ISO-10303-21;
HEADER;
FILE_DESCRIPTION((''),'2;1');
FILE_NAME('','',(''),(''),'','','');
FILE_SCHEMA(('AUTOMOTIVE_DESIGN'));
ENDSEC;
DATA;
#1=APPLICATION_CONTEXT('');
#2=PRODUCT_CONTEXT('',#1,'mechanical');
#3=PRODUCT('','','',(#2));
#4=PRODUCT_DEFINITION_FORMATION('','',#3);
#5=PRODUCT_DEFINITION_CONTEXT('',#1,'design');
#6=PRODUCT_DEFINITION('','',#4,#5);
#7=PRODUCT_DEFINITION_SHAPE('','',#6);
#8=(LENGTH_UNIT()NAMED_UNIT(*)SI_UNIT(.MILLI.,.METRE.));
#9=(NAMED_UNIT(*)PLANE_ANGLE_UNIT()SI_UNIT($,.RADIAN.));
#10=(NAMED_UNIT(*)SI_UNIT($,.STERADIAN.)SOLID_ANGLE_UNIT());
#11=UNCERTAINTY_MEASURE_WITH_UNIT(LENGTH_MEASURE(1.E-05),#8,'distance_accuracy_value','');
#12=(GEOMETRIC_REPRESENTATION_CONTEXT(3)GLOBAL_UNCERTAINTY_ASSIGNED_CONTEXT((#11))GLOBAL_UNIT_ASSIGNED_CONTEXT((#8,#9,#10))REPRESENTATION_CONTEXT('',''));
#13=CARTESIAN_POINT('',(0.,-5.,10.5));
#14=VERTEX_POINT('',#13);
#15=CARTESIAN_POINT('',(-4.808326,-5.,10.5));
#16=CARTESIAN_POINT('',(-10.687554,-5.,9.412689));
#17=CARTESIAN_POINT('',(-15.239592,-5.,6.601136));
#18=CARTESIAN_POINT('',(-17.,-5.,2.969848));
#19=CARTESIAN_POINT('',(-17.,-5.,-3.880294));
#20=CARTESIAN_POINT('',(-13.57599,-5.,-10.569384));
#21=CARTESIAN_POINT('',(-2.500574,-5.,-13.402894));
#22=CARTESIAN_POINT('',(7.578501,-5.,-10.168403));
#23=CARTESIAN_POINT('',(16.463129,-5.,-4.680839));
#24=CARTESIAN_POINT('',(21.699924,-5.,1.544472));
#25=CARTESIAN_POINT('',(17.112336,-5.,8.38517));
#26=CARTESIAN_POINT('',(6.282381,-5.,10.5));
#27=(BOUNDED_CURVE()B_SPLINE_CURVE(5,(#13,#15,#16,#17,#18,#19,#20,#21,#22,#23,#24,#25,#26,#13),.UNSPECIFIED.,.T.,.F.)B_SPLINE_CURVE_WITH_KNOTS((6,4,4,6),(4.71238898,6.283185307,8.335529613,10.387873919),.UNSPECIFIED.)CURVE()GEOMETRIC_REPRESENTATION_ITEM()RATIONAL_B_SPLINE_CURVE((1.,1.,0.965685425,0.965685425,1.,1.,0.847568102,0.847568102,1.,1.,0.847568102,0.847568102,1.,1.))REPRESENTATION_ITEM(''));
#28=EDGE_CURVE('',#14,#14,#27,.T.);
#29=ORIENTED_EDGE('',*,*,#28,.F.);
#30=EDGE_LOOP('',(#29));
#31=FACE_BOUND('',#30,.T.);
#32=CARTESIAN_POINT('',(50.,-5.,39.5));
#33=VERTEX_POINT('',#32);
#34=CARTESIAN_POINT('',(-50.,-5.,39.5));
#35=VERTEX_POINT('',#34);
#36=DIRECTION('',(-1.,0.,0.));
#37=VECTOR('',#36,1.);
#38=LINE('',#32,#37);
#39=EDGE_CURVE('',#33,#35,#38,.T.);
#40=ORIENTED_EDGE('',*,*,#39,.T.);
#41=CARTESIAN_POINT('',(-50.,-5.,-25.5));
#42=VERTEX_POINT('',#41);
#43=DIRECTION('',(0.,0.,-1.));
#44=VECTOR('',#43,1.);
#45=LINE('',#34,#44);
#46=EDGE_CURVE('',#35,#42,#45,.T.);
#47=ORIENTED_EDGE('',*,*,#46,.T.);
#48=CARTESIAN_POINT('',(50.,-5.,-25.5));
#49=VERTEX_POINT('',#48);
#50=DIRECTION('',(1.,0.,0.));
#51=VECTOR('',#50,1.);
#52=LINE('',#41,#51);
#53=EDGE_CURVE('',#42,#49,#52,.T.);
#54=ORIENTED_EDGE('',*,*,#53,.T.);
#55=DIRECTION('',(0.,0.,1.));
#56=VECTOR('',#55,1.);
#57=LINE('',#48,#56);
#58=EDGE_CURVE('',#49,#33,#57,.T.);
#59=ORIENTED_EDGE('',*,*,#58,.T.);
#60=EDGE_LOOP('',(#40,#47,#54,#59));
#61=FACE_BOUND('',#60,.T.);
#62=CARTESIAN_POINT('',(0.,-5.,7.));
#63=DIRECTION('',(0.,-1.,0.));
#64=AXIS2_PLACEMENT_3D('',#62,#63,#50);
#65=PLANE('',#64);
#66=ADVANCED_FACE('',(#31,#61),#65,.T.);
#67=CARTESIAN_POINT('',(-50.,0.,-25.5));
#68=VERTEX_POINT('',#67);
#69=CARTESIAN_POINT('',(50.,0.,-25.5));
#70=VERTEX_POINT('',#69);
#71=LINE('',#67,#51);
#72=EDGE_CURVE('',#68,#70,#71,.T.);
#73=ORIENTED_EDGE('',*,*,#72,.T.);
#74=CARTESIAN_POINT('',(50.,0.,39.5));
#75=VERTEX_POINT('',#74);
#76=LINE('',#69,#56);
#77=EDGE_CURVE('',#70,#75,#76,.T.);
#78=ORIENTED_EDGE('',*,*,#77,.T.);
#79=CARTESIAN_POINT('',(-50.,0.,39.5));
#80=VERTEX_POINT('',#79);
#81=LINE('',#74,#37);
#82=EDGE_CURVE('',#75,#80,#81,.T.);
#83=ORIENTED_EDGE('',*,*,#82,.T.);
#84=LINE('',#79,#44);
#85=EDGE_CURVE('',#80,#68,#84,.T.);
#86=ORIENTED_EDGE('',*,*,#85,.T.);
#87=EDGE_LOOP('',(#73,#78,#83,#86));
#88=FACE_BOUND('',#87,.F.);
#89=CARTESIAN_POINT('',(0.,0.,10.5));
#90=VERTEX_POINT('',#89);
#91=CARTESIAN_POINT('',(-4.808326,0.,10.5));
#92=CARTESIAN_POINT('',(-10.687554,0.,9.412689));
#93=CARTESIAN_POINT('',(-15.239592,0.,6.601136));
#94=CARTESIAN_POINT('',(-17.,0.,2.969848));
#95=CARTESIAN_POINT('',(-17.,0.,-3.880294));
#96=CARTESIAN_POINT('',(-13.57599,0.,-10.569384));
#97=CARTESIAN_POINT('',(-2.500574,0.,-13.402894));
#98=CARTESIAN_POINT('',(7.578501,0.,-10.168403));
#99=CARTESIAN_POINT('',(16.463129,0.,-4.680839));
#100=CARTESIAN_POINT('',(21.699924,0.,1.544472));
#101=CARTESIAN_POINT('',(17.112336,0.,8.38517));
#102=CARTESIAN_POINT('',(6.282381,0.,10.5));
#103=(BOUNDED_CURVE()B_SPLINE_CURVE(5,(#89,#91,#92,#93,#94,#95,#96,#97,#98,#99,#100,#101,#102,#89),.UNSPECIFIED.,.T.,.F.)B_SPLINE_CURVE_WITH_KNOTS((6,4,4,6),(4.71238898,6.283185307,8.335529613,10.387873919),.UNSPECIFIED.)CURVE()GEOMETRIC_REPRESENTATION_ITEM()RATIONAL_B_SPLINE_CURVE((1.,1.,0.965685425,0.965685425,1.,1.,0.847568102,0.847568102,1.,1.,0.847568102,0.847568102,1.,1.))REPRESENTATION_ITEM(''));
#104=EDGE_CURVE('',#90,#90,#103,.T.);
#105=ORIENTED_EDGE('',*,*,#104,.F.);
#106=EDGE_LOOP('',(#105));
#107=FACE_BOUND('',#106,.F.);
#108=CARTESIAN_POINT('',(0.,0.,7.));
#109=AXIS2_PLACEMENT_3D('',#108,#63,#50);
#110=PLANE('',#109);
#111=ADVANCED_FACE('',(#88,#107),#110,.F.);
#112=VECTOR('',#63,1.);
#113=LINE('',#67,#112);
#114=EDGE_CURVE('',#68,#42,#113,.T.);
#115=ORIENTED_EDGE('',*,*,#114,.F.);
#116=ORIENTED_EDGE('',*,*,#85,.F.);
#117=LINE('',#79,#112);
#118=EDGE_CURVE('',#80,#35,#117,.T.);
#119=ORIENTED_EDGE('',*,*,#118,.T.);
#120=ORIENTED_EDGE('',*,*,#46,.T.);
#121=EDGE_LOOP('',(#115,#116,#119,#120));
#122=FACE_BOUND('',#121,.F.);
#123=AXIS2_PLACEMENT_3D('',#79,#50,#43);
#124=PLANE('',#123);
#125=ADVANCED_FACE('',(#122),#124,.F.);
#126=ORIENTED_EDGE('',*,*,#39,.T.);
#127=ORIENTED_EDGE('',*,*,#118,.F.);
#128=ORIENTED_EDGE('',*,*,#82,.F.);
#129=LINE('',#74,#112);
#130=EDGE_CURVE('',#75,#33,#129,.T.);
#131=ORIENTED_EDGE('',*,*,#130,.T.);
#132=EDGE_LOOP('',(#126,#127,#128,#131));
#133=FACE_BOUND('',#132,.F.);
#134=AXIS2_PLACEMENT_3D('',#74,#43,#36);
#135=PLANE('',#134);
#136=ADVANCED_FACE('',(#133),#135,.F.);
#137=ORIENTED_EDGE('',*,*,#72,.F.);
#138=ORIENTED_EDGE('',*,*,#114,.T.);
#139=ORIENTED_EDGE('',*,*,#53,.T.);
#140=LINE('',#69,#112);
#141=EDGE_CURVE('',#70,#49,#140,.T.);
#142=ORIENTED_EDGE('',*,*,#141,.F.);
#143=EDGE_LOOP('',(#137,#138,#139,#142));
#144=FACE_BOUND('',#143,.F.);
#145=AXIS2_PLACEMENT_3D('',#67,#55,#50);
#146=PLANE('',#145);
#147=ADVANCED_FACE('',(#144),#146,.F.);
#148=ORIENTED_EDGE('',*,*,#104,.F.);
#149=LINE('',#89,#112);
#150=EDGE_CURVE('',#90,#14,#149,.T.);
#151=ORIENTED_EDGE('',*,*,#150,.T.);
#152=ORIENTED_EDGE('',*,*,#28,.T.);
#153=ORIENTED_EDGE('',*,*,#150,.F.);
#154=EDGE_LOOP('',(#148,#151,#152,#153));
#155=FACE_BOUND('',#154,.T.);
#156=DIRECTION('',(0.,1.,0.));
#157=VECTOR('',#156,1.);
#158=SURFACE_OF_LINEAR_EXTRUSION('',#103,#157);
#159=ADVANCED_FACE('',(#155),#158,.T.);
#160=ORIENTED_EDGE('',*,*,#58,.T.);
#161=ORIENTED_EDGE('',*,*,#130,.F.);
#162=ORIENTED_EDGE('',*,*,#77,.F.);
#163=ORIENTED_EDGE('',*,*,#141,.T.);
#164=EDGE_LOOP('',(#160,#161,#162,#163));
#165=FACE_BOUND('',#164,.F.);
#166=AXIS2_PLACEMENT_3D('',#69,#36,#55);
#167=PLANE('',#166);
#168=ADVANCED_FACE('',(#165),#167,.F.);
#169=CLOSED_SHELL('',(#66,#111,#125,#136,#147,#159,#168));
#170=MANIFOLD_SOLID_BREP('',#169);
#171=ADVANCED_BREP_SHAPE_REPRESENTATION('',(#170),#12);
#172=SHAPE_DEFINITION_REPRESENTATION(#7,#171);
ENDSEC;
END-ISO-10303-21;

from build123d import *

# Parameters (mm, degrees)
F1_DEPTH = 5


# Not quite as in the source:
# - a feature names something its author has since deleted; it is built from what else it names


with BuildPart() as f1:
    # F0 (on Front) → F1 (new body)
    with BuildSketch(Plane.XZ):
        Polygon((50, 39.5), (0, 39.5), (-50, 39.5), (-50, -25.5), (50, -25.5), align=None)
        with BuildLine():
            add(Edge.make_bspline(
                [(-17, 0), (-17, -25.3492424049), (12.0208152802, -7.4246212025), (41.0416305603, 10.5), (0, 10.5)],
                knots=[0, 0, 0, 2.3561944902, 2.3561944902, 4.7123889804, 4.7123889804, 4.7123889804], degree=2, weights=[1, 0.3826834324, 1, 0.3826834324, 1]))
            add(Edge.make_bspline(
                [(0, 10.5), (-17, 10.5), (-17, 0)],
                knots=[4.7123889804, 4.7123889804, 4.7123889804, 6.2831853072, 6.2831853072, 6.2831853072], degree=2, weights=[1, 0.7071067812, 1]))
        make_face(mode=Mode.SUBTRACT)
    extrude(amount=F1_DEPTH)


solid = f1.part
